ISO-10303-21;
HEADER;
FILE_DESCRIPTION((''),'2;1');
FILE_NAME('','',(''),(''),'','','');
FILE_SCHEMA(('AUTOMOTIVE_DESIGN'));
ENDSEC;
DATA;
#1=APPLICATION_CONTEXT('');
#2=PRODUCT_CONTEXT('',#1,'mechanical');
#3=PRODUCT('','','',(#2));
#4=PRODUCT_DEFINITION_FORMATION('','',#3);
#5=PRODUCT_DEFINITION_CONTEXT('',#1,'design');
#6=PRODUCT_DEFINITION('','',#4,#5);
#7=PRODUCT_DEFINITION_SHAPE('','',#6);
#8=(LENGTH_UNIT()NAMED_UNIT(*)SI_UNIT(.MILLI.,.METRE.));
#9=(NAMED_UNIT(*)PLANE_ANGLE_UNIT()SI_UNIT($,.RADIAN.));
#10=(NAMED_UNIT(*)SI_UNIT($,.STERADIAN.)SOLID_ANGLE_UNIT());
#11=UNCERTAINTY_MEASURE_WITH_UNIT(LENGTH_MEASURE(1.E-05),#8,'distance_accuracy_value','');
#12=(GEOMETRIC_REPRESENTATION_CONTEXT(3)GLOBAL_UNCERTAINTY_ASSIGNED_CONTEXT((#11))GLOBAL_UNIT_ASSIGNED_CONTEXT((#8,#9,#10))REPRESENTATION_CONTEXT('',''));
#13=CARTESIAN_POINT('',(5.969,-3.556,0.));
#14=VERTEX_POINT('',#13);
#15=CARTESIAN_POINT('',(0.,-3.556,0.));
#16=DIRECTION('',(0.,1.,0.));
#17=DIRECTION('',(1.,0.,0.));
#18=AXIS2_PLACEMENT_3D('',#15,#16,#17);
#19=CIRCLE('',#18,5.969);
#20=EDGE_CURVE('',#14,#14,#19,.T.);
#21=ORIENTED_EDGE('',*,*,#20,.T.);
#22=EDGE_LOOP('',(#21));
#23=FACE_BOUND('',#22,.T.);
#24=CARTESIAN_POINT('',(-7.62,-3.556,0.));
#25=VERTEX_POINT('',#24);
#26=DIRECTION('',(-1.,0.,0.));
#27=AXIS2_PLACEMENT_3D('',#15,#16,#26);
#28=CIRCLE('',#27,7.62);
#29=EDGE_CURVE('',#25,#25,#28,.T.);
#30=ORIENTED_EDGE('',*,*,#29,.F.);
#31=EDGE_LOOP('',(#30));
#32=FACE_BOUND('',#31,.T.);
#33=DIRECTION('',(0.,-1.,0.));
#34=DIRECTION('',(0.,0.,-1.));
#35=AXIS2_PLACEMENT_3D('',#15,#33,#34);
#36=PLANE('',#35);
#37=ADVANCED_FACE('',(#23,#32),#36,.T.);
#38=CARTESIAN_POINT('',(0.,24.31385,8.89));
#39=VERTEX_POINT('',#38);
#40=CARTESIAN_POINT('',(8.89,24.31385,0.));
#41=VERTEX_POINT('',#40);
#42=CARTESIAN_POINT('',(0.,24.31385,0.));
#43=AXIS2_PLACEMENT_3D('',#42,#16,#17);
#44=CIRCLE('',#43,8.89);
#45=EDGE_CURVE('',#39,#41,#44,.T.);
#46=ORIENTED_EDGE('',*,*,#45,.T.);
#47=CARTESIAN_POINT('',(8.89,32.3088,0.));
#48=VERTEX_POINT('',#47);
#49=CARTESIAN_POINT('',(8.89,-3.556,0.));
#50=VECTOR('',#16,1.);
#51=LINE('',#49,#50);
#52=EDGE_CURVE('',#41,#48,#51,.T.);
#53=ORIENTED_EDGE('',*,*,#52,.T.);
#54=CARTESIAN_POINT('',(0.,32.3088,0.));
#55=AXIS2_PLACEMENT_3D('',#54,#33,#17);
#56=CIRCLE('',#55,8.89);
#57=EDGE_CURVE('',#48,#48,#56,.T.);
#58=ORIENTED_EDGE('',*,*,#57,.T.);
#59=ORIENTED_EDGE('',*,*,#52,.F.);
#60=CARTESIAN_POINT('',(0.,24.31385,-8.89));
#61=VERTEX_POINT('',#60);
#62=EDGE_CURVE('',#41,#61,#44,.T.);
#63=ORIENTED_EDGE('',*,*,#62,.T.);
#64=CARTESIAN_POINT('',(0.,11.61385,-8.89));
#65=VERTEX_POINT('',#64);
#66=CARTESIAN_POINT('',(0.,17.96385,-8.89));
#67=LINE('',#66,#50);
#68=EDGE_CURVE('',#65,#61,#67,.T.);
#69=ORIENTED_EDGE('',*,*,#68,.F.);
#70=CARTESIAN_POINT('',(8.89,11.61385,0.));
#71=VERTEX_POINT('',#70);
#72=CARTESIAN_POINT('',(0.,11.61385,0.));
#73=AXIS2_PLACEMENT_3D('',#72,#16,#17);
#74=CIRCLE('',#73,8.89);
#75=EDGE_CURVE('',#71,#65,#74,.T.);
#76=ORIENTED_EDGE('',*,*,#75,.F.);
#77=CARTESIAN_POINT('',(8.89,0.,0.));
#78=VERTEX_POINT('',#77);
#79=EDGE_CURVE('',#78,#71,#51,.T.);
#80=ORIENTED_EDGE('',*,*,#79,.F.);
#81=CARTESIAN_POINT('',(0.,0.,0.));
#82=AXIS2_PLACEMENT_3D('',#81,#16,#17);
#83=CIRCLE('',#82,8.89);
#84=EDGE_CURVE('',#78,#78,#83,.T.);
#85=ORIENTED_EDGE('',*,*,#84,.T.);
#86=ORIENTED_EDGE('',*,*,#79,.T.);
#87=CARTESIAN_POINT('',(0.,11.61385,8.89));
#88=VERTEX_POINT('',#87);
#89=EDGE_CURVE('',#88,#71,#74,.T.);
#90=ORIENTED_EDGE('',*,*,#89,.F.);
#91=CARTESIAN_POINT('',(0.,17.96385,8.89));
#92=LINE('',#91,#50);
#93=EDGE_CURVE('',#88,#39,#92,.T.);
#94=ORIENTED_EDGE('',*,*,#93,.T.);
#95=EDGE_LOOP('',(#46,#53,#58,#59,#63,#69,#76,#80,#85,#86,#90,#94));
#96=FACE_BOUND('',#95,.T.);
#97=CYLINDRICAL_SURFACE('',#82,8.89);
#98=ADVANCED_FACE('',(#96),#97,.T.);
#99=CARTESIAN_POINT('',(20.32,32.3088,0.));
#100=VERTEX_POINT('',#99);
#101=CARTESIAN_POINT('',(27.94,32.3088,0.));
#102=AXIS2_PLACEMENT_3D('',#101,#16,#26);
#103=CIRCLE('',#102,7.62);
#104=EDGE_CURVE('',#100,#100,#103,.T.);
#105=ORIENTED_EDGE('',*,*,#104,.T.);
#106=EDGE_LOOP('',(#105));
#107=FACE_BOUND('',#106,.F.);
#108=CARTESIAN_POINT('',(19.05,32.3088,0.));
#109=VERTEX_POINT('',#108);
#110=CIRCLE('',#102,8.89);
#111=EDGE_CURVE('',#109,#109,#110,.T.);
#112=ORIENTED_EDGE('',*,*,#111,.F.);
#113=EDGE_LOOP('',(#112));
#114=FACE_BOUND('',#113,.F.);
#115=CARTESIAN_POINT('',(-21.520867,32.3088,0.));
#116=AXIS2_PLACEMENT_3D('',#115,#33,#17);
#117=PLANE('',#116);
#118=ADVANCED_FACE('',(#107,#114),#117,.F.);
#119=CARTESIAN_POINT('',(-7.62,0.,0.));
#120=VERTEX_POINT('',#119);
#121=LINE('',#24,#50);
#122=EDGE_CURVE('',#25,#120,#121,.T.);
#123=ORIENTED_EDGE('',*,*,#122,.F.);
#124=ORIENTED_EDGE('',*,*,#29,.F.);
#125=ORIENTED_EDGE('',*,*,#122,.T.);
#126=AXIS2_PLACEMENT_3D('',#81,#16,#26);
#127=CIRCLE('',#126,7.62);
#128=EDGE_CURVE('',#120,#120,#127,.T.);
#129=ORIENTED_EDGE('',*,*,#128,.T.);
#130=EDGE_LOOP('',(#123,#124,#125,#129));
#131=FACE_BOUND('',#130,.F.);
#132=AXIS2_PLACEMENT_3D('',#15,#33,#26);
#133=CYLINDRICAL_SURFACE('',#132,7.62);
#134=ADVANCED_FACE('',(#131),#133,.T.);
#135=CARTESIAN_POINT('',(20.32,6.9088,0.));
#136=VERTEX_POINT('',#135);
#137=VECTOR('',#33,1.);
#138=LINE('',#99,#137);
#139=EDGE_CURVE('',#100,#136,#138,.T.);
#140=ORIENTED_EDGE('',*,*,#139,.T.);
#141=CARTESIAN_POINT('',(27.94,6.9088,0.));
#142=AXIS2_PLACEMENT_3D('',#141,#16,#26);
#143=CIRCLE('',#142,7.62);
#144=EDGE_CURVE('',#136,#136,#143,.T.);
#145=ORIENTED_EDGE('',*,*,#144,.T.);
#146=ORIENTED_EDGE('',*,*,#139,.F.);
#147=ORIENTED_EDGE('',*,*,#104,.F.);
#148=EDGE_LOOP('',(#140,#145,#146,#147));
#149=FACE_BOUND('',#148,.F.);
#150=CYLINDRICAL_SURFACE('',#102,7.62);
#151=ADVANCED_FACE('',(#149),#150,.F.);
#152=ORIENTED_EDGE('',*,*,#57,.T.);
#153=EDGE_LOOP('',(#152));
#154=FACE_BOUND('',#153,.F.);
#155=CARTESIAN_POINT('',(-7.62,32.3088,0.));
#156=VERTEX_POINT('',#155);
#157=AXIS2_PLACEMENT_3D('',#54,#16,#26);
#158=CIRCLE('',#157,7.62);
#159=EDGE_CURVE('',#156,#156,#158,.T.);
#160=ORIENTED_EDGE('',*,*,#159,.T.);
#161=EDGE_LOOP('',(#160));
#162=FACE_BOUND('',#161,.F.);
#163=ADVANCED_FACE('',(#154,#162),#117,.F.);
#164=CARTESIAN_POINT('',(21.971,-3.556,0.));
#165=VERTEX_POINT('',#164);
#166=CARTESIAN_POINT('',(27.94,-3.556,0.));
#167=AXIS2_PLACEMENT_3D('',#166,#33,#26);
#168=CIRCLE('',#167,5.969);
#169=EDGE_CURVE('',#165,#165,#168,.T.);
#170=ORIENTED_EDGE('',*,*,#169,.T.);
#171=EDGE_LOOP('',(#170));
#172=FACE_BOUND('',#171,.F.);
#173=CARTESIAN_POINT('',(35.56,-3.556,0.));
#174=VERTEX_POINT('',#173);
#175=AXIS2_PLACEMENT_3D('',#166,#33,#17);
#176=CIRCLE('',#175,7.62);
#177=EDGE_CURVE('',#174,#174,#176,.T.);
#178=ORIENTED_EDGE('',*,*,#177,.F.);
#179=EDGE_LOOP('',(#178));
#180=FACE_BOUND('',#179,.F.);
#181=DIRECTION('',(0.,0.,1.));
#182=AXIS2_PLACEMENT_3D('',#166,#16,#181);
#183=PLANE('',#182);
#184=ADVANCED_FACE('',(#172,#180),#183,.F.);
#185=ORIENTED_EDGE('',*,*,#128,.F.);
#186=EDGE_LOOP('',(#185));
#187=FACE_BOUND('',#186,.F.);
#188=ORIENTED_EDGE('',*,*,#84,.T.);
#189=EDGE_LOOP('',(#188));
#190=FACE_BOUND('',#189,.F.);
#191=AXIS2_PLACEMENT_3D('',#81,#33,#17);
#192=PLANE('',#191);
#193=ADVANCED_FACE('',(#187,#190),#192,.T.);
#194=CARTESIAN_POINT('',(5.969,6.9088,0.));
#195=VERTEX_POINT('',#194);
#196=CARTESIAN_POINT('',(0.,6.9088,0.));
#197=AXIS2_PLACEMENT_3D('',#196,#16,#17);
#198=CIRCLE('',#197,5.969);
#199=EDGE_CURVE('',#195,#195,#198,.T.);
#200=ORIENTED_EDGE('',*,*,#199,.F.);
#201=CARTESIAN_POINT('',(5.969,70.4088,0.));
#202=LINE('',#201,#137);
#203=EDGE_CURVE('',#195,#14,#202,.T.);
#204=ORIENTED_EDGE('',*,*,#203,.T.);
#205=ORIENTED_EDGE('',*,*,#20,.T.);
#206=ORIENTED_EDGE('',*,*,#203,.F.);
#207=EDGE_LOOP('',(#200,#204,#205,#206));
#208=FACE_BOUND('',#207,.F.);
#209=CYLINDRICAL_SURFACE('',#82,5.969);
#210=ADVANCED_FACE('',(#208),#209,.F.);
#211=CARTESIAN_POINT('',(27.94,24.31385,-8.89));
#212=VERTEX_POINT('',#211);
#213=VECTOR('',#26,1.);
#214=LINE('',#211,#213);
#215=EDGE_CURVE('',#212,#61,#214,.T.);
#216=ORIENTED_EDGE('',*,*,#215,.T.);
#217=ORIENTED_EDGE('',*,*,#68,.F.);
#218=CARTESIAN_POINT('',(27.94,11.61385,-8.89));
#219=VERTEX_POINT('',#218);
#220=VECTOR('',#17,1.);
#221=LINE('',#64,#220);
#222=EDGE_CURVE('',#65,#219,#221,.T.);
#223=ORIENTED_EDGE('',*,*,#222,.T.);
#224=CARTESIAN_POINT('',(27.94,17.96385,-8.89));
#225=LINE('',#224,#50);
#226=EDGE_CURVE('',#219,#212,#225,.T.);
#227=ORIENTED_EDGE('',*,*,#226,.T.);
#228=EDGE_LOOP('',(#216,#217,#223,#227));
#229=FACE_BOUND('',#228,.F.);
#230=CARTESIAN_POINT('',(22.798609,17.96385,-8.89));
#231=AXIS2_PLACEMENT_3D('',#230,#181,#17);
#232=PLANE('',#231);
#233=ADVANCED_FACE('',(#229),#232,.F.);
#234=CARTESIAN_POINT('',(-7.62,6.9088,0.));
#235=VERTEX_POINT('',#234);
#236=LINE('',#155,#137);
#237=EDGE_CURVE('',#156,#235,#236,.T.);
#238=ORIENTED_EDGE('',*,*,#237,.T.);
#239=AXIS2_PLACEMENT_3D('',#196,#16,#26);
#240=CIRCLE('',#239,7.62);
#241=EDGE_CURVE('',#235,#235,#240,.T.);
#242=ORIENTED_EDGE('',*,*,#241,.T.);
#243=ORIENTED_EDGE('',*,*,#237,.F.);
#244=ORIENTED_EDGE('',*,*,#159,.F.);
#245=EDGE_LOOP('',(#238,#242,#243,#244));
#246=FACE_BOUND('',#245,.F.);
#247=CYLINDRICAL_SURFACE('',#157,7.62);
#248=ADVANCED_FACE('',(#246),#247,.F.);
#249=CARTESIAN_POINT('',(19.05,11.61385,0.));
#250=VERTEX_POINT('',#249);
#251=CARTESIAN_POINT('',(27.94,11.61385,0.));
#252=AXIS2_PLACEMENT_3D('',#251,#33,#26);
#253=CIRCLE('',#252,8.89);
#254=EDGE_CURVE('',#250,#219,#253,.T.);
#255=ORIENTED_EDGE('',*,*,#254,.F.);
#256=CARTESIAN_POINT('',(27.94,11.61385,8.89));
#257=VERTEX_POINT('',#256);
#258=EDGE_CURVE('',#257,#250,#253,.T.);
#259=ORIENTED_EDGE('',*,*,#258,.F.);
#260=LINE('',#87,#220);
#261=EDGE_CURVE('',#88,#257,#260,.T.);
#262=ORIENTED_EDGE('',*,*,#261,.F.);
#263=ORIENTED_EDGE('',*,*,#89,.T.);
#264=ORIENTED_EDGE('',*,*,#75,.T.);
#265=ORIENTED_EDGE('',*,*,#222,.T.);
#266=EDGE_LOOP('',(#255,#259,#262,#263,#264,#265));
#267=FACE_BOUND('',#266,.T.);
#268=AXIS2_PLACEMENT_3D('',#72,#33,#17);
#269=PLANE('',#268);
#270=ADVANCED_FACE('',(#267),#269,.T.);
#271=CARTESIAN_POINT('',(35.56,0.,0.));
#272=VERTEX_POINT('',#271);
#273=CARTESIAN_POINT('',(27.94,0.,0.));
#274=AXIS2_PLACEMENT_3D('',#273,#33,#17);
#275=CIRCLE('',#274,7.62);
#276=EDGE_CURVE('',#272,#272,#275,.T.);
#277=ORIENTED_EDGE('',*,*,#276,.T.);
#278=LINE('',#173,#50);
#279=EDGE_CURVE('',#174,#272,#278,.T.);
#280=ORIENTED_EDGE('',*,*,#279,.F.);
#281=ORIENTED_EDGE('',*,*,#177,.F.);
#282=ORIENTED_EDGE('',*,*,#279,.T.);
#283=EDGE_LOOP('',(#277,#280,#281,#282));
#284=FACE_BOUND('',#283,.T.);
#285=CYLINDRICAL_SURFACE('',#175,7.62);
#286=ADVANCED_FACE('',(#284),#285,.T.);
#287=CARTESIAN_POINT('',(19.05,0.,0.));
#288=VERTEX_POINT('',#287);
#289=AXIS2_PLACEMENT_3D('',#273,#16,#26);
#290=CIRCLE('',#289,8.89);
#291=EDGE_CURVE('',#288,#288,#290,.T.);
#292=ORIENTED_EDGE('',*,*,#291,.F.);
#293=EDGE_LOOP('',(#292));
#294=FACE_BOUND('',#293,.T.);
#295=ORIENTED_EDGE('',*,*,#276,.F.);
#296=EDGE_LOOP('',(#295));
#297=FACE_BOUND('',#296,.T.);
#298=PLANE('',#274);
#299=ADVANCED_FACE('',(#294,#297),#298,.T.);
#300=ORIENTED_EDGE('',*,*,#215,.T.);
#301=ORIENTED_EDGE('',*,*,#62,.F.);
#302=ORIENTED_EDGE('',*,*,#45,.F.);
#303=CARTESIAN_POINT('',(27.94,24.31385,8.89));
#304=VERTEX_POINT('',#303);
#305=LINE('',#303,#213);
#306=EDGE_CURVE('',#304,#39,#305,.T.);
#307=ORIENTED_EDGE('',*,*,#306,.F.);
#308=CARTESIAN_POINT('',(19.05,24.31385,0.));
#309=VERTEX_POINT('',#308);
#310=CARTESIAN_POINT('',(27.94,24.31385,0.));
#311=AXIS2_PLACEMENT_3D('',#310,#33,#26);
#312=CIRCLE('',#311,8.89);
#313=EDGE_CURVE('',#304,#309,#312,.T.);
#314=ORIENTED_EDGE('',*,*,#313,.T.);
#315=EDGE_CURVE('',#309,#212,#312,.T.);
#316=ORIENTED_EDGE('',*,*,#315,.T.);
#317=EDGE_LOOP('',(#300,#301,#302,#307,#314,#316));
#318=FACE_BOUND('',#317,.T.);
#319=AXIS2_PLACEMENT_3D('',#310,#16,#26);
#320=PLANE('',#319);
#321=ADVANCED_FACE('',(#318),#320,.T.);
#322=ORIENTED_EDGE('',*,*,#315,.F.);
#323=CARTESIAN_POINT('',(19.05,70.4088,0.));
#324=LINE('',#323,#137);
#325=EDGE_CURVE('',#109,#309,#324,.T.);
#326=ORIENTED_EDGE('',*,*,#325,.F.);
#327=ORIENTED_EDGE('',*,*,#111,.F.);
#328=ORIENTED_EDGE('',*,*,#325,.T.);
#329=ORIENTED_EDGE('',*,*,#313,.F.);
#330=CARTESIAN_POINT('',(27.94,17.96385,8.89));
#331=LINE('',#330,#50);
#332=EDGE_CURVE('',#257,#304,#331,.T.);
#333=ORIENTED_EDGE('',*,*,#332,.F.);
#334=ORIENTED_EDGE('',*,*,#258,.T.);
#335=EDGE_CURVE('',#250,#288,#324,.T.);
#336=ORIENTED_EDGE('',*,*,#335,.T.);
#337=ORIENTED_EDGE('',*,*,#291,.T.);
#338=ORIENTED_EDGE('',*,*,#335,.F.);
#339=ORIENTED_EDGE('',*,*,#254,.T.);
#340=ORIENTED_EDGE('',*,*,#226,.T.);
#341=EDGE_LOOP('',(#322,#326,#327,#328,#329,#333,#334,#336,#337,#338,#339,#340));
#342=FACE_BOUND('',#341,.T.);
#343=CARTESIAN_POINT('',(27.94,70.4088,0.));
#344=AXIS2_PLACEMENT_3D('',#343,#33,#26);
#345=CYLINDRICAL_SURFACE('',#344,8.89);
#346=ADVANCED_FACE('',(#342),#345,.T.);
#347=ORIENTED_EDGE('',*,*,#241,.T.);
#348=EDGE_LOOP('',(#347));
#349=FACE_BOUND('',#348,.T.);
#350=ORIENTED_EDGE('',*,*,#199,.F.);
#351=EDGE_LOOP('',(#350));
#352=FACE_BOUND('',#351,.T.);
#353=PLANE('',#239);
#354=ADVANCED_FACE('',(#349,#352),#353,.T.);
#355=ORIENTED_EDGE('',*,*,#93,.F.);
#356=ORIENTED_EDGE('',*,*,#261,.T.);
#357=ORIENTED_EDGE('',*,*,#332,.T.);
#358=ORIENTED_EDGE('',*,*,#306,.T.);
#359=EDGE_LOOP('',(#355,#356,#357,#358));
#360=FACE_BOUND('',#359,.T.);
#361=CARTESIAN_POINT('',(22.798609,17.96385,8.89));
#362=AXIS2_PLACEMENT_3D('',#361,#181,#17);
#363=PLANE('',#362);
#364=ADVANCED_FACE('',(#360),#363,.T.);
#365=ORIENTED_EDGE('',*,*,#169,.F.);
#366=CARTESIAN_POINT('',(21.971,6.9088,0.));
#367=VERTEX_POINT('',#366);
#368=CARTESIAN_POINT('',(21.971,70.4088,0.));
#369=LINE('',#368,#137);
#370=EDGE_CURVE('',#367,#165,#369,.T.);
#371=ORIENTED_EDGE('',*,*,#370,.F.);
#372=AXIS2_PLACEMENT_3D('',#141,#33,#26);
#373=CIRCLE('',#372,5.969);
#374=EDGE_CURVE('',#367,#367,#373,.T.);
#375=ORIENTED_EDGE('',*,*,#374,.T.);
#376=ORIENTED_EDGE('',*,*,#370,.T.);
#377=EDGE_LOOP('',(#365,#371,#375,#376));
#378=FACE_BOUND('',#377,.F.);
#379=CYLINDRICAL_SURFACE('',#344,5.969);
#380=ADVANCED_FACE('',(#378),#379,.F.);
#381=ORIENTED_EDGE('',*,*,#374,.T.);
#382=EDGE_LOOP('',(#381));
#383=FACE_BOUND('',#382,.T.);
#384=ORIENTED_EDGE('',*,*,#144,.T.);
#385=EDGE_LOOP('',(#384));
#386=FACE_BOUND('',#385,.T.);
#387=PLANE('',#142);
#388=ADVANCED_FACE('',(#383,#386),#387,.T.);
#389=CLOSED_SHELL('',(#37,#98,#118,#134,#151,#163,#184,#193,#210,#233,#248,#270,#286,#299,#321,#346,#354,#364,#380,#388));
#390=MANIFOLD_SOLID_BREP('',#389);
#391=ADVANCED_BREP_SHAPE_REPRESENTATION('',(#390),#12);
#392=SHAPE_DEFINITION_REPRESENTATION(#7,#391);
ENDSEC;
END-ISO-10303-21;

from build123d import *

# Parameters (mm, degrees)
F1_R           = 8.89
F1_R_2         = 5.969
F3_DEPTH       = 3.556
F5_R           = 8.89
F5_R_2         = 7.62
F7_DEPTH       = 3.556
F8_DEPTH       = 25.4
F8_DEPTH_BACK  = 25.4
F0_W           = 10.282781499
F0_H           = 12.7
F0_W_2         = 17.657218501
F11_DEPTH      = 8.89
F11_DEPTH_BACK = 8.89
F9_R           = 7.62
F10_R          = 7.62
F12_DEPTH      = 25.4


# Not quite as in the source:
# - a feature of the source that left no trace in its solid (it failed there, or was rolled back) is left out
# - a pattern or mirror of a feature is missing from the dataset's text; its kind, count and spacing are read off the source's solid


with BuildPart() as f2:
    # F2: sweep along a path in F0
    with BuildLine(Plane.XY) as f2_path:
        Line((0, 0), (0, 70.4088))
        ThreePointArc((0, 70.4088), (13.97, 84.3788), (27.94, 70.4088))
        Line((27.94, 70.4088), (27.94, 0))
        Line((27.94, 0), (27.94, -3.556))
    # F1 (on Front) → F2 (sweep)
    with BuildSketch(Plane.XZ):
        Circle(F1_R)
        Circle(F1_R_2, mode=Mode.SUBTRACT)
    sweep(path=f2_path.line)

    # F3 (add): a face of the model
    f3_faces = [f2.faces().sort_by_distance(p)[0] for p in [
        (-8.6385528286, 0, 0),
    ]]
    extrude(f3_faces, amount=F3_DEPTH)

    # F5 (on face) → F7 (cut)
    with BuildSketch(Plane.XZ.offset(3.556)):
        with Locations((27.94, 0)):
            Circle(F5_R)
        with Locations((27.94, 0)):
            Circle(F5_R_2, mode=Mode.SUBTRACT)
    f7 = extrude(amount=-F7_DEPTH, mode=Mode.SUBTRACT)

    # F7_copies: F7 across plane
    add(f7.mirror(Plane(origin=(13.97, 0, 0), x_dir=(0, 0, -1), z_dir=(-1, 0, 0))), mode=Mode.SUBTRACT)

    # F0 (on Top) → F8 (cut, two sides)
    with BuildSketch(Plane.XY) as f8_sk:
        with BuildLine():
            Line((-21.5208670124, 32.3088), (0, 32.3088))
            Line((0, 32.3088), (0, 70.4088))
            ThreePointArc((0, 70.4088), (13.97, 84.3788), (27.94, 70.4088))
            Line((27.94, 70.4088), (27.94, 32.3088))
            Line((27.94, 32.3088), (57.1982562542, 32.3088))
            Line((57.1982562542, 32.3088), (57.1982562542, 105.6616994024))
            Line((57.1982562542, 105.6616994024), (-21.5208670124, 105.6616994024))
            Line((-21.5208670124, 105.6616994024), (-21.5208670124, 32.3088))
        make_face()
        with BuildLine():
            Line((0, 70.4088), (0, 32.3088))
            Line((0, 32.3088), (13.97, 32.3088))
            Line((13.97, 32.3088), (27.94, 32.3088))
            Line((27.94, 32.3088), (27.94, 70.4088))
            ThreePointArc((27.94, 70.4088), (13.97, 84.3788), (0, 70.4088))
        make_face()
    extrude(amount=-F8_DEPTH, mode=Mode.SUBTRACT)
    extrude(f8_sk.sketch, amount=F8_DEPTH_BACK, mode=Mode.SUBTRACT)

    # F0 (on Top) → F11 (join, two sides)
    with BuildSketch(Plane.XY) as f11_sk:
        with Locations((22.7986092505, 17.9638495505)):
            Rectangle(F0_W, F0_H)
        with Locations((8.8286092505, 17.9638495505)):
            Rectangle(F0_W_2, F0_H)
    extrude(amount=F11_DEPTH)
    extrude(f11_sk.sketch, amount=-F11_DEPTH_BACK)

    # F9 (on face) + F10 (on face) → F12 (cut)
    with BuildSketch(Plane(origin=(0, 32.3088, 0), x_dir=(-1, 0, 0), z_dir=(0, 1, 0))):
        with Locations((-27.94, 0)):
            Circle(F9_R)
    with BuildSketch(Plane(origin=(0, 32.3088, 0), x_dir=(-1, 0, 0), z_dir=(0, 1, 0))):
        Circle(F10_R)
    extrude(amount=-F12_DEPTH, mode=Mode.SUBTRACT)


solid = f2.part
